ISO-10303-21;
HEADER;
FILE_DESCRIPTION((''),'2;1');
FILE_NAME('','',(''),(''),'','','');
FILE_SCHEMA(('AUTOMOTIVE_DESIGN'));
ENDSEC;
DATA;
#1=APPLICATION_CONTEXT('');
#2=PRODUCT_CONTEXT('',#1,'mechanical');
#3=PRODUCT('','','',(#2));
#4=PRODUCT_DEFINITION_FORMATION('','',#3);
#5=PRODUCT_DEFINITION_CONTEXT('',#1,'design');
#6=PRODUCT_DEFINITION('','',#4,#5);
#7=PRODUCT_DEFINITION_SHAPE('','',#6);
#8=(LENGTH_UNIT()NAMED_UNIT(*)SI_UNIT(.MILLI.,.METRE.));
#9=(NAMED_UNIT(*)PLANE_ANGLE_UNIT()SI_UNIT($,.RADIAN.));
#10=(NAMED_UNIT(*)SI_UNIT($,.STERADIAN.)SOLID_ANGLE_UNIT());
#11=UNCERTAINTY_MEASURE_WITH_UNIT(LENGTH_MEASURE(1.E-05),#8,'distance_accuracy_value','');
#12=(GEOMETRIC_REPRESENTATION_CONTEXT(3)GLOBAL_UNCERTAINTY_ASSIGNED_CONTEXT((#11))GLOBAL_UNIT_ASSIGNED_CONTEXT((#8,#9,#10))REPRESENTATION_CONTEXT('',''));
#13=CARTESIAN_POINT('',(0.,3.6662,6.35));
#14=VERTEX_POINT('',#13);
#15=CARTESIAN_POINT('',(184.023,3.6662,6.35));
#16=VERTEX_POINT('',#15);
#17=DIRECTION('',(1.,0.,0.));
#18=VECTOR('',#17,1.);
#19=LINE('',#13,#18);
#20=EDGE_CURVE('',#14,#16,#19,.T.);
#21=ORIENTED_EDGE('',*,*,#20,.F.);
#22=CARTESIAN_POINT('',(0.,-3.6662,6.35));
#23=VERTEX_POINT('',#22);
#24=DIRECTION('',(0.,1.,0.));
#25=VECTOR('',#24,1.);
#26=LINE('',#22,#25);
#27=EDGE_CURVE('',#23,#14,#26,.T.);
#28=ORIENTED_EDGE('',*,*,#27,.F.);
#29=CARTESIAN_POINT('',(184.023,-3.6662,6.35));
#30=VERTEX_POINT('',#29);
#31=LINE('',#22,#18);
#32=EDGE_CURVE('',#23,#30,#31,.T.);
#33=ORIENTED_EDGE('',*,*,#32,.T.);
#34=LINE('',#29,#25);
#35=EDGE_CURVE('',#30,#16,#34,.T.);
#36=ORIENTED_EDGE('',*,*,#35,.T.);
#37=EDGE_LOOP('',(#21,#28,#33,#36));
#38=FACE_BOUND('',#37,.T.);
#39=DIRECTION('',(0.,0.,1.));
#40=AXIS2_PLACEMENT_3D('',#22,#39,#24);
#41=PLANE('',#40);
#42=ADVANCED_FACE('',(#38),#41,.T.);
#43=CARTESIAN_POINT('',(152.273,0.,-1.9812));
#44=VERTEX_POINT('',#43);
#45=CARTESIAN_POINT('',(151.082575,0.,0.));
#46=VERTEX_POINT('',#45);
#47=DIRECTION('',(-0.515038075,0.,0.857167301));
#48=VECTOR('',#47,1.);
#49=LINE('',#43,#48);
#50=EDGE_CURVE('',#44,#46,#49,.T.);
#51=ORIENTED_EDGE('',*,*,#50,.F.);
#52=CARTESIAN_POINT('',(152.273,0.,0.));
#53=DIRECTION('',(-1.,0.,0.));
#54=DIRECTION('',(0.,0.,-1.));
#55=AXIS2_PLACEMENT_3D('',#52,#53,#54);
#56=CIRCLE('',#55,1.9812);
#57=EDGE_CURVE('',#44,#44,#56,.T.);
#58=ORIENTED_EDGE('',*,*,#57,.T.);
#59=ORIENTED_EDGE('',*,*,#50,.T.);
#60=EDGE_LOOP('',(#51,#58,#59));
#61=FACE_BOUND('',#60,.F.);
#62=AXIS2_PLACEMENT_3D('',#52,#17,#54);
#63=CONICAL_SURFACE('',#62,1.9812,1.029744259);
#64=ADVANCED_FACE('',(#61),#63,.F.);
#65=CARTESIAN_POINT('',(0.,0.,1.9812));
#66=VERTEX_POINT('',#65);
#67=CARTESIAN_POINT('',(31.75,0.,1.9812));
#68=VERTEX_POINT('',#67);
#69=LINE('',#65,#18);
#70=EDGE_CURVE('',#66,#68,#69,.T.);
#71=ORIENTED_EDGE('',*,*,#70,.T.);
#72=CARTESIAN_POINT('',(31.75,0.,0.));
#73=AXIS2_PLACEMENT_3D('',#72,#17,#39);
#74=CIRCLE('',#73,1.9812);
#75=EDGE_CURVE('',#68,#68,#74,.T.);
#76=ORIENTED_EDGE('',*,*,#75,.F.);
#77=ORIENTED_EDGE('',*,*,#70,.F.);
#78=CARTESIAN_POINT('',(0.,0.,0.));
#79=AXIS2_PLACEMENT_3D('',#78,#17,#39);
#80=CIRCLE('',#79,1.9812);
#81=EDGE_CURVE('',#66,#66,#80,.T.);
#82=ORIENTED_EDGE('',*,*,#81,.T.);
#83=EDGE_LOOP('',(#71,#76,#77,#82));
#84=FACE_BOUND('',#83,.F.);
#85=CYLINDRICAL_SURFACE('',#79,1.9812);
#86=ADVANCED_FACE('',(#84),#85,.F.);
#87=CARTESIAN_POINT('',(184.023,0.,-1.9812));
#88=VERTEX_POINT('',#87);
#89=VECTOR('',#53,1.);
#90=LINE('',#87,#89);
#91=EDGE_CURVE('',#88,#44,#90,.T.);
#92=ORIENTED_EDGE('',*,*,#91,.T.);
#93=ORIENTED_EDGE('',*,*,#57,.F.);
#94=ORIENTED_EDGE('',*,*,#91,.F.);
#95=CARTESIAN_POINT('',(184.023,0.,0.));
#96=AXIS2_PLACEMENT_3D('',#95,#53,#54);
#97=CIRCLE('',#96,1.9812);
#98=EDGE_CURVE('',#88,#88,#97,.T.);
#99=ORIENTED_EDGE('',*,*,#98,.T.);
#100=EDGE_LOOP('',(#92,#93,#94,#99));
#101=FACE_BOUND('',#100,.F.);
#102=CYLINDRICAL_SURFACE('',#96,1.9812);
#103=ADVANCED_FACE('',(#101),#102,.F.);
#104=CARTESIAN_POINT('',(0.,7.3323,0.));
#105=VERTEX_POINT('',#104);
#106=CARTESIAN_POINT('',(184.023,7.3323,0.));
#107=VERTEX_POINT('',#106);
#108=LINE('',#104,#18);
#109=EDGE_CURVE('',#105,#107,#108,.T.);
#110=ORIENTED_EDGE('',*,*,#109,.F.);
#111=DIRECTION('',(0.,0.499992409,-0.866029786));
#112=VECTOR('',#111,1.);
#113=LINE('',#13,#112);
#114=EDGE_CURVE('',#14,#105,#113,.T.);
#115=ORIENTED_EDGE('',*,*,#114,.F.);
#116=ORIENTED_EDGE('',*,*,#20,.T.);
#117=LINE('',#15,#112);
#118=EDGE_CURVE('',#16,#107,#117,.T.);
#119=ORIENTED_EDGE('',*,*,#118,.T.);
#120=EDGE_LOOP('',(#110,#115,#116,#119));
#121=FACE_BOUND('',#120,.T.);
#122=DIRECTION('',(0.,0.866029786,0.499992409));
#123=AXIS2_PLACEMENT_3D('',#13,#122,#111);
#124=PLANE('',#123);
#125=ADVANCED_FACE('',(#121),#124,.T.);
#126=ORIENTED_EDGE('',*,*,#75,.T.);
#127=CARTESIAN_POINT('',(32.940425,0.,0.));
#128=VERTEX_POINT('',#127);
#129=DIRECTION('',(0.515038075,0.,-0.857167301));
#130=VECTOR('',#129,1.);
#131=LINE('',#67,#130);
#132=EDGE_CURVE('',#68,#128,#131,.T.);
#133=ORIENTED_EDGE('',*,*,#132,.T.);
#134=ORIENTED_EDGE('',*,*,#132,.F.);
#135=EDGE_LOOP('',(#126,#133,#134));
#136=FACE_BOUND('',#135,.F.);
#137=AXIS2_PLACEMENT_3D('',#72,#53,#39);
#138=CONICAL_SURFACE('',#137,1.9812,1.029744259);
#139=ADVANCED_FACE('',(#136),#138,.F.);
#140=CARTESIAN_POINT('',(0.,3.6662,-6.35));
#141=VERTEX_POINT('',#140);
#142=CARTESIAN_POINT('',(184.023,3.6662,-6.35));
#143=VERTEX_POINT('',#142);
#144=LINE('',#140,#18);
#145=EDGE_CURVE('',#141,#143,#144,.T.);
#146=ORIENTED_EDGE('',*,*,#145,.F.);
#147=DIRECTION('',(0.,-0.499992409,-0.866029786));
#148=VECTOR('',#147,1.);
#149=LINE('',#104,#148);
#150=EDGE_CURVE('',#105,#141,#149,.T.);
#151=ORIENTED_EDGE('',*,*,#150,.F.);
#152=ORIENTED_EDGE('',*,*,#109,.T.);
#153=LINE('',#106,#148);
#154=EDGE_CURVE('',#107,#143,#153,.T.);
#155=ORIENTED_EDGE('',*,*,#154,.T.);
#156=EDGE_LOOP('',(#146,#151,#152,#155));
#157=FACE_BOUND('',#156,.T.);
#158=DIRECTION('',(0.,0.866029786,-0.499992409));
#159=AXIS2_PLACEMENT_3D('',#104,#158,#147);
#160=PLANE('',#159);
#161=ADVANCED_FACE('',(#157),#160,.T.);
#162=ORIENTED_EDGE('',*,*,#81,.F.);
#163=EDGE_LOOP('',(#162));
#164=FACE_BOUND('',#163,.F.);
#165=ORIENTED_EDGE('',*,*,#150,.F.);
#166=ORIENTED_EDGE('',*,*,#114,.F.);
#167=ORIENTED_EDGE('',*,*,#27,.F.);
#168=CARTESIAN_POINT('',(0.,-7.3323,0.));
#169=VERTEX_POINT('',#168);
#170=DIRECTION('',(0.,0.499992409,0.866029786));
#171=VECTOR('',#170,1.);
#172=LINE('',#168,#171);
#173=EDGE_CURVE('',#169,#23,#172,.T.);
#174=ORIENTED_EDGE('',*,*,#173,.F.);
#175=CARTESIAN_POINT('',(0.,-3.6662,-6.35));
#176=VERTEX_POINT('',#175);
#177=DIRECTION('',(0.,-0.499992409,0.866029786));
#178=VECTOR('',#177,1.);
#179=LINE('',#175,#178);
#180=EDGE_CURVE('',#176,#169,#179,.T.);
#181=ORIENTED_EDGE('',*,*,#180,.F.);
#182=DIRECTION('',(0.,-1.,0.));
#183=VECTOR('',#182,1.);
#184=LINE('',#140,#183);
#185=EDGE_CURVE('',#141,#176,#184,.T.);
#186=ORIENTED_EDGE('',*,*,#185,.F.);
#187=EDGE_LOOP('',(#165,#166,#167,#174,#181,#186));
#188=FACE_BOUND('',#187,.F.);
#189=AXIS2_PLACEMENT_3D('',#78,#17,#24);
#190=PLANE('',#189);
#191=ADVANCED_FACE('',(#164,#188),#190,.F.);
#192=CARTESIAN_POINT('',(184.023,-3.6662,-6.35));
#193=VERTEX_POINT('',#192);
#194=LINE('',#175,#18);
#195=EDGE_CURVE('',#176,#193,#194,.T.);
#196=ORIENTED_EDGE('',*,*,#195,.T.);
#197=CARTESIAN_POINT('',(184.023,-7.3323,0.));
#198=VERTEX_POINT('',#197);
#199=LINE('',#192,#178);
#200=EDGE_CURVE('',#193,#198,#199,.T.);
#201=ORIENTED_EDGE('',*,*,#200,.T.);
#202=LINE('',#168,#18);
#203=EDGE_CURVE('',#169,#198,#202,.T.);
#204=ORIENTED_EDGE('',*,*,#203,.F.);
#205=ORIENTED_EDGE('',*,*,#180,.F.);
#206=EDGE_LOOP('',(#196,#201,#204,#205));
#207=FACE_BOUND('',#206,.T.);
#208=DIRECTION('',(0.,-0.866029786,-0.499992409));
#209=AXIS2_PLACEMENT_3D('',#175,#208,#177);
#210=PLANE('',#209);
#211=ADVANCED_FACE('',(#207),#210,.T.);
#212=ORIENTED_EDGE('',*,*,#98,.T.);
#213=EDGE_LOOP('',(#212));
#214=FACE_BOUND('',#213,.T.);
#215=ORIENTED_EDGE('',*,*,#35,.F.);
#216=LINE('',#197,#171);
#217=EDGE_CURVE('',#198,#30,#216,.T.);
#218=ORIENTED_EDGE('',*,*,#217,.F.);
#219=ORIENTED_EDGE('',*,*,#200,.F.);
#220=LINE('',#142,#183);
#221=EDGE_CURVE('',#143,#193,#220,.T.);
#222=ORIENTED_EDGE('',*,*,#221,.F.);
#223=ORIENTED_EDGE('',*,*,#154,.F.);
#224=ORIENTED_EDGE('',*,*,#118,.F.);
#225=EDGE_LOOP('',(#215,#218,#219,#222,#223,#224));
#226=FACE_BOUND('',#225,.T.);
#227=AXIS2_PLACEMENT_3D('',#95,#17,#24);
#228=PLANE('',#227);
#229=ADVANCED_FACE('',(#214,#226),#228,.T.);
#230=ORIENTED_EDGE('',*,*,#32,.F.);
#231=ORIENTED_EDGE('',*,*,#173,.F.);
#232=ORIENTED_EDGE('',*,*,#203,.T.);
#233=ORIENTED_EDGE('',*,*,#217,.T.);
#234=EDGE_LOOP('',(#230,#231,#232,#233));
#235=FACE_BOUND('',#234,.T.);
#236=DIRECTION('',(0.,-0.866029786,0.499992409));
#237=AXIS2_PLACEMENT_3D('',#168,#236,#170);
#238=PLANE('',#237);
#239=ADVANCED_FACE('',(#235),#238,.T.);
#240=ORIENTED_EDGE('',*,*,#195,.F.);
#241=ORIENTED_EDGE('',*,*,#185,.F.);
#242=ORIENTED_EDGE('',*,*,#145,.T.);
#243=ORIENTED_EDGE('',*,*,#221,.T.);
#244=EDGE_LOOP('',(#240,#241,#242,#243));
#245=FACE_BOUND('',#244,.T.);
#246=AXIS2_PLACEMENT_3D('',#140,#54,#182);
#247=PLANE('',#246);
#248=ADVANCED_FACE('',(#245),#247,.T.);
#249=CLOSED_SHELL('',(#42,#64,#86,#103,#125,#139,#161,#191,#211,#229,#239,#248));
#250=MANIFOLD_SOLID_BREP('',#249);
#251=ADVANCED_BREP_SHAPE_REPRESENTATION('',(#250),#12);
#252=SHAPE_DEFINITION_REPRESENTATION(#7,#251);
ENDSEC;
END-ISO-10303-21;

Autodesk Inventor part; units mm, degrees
ref_plane "YZ Plane" through (0, 0, 0) normal (1, 0, 0) x (0, 1, 0)
ref_plane "XZ Plane" through (0, 0, 0) normal (0, 1, 0) x (-1, 0, 0)
ref_plane "XY Plane" through (0, 0, 0) normal (0, 0, 1) x (1, 0, 0)
sketch "Sketch1" plane through (0, 0, 0) normal (1, 0, 0) x (0, 1, 0)
  line L0 (-3.6662, -6.35) -> (-7.3323, 0)
  line L1 (-7.3323, 0) -> (-3.6662, 6.35)
  line L2 (-3.6662, 6.35) -> (3.6662, 6.35)
  line L3 (3.6662, 6.35) -> (7.3323, 0)
  line L4 (7.3323, 0) -> (3.6662, -6.35)
  line L5 (3.6662, -6.35) -> (-3.6662, -6.35)
  point P0 (0, 0)
  point P1 (0, 0)
  dimension "d0" = 12.7
extrude "Extrusion1" add sketch "Sketch1" along normal blind 184.023
sketch "Sketch2" plane through (184.023, 0, 0) normal (1, 0, 0) x (0, 0, -1)
  point P0 (0, 0)
  point P1 (0, 0)
hole "Hole1" at (184.023, 0, 0) direction (-1, 0, 0) diameter 3.9624 depth 31.75 tip angle 118 thread size "10-32 UNF" class "2B" standard "ANSI Unified Screw Threads"
sketch "Sketch3" plane through (0, 0, 0) normal (-1, 0, 0) x (0, 0, 1)
  circle A0 centre (0, 0) radius 1.9812 projected
hole "Hole2" at (0, 0, 0) direction (1, 0, 0) diameter 3.9624 depth 31.75 tip angle 118 thread size "10-32 UNF" class "2B" standard "ANSI Unified Screw Threads"
properties part number "STOCK,HEX,SHAFT,KICKER,FRONT" material "Aluminum 6061"
